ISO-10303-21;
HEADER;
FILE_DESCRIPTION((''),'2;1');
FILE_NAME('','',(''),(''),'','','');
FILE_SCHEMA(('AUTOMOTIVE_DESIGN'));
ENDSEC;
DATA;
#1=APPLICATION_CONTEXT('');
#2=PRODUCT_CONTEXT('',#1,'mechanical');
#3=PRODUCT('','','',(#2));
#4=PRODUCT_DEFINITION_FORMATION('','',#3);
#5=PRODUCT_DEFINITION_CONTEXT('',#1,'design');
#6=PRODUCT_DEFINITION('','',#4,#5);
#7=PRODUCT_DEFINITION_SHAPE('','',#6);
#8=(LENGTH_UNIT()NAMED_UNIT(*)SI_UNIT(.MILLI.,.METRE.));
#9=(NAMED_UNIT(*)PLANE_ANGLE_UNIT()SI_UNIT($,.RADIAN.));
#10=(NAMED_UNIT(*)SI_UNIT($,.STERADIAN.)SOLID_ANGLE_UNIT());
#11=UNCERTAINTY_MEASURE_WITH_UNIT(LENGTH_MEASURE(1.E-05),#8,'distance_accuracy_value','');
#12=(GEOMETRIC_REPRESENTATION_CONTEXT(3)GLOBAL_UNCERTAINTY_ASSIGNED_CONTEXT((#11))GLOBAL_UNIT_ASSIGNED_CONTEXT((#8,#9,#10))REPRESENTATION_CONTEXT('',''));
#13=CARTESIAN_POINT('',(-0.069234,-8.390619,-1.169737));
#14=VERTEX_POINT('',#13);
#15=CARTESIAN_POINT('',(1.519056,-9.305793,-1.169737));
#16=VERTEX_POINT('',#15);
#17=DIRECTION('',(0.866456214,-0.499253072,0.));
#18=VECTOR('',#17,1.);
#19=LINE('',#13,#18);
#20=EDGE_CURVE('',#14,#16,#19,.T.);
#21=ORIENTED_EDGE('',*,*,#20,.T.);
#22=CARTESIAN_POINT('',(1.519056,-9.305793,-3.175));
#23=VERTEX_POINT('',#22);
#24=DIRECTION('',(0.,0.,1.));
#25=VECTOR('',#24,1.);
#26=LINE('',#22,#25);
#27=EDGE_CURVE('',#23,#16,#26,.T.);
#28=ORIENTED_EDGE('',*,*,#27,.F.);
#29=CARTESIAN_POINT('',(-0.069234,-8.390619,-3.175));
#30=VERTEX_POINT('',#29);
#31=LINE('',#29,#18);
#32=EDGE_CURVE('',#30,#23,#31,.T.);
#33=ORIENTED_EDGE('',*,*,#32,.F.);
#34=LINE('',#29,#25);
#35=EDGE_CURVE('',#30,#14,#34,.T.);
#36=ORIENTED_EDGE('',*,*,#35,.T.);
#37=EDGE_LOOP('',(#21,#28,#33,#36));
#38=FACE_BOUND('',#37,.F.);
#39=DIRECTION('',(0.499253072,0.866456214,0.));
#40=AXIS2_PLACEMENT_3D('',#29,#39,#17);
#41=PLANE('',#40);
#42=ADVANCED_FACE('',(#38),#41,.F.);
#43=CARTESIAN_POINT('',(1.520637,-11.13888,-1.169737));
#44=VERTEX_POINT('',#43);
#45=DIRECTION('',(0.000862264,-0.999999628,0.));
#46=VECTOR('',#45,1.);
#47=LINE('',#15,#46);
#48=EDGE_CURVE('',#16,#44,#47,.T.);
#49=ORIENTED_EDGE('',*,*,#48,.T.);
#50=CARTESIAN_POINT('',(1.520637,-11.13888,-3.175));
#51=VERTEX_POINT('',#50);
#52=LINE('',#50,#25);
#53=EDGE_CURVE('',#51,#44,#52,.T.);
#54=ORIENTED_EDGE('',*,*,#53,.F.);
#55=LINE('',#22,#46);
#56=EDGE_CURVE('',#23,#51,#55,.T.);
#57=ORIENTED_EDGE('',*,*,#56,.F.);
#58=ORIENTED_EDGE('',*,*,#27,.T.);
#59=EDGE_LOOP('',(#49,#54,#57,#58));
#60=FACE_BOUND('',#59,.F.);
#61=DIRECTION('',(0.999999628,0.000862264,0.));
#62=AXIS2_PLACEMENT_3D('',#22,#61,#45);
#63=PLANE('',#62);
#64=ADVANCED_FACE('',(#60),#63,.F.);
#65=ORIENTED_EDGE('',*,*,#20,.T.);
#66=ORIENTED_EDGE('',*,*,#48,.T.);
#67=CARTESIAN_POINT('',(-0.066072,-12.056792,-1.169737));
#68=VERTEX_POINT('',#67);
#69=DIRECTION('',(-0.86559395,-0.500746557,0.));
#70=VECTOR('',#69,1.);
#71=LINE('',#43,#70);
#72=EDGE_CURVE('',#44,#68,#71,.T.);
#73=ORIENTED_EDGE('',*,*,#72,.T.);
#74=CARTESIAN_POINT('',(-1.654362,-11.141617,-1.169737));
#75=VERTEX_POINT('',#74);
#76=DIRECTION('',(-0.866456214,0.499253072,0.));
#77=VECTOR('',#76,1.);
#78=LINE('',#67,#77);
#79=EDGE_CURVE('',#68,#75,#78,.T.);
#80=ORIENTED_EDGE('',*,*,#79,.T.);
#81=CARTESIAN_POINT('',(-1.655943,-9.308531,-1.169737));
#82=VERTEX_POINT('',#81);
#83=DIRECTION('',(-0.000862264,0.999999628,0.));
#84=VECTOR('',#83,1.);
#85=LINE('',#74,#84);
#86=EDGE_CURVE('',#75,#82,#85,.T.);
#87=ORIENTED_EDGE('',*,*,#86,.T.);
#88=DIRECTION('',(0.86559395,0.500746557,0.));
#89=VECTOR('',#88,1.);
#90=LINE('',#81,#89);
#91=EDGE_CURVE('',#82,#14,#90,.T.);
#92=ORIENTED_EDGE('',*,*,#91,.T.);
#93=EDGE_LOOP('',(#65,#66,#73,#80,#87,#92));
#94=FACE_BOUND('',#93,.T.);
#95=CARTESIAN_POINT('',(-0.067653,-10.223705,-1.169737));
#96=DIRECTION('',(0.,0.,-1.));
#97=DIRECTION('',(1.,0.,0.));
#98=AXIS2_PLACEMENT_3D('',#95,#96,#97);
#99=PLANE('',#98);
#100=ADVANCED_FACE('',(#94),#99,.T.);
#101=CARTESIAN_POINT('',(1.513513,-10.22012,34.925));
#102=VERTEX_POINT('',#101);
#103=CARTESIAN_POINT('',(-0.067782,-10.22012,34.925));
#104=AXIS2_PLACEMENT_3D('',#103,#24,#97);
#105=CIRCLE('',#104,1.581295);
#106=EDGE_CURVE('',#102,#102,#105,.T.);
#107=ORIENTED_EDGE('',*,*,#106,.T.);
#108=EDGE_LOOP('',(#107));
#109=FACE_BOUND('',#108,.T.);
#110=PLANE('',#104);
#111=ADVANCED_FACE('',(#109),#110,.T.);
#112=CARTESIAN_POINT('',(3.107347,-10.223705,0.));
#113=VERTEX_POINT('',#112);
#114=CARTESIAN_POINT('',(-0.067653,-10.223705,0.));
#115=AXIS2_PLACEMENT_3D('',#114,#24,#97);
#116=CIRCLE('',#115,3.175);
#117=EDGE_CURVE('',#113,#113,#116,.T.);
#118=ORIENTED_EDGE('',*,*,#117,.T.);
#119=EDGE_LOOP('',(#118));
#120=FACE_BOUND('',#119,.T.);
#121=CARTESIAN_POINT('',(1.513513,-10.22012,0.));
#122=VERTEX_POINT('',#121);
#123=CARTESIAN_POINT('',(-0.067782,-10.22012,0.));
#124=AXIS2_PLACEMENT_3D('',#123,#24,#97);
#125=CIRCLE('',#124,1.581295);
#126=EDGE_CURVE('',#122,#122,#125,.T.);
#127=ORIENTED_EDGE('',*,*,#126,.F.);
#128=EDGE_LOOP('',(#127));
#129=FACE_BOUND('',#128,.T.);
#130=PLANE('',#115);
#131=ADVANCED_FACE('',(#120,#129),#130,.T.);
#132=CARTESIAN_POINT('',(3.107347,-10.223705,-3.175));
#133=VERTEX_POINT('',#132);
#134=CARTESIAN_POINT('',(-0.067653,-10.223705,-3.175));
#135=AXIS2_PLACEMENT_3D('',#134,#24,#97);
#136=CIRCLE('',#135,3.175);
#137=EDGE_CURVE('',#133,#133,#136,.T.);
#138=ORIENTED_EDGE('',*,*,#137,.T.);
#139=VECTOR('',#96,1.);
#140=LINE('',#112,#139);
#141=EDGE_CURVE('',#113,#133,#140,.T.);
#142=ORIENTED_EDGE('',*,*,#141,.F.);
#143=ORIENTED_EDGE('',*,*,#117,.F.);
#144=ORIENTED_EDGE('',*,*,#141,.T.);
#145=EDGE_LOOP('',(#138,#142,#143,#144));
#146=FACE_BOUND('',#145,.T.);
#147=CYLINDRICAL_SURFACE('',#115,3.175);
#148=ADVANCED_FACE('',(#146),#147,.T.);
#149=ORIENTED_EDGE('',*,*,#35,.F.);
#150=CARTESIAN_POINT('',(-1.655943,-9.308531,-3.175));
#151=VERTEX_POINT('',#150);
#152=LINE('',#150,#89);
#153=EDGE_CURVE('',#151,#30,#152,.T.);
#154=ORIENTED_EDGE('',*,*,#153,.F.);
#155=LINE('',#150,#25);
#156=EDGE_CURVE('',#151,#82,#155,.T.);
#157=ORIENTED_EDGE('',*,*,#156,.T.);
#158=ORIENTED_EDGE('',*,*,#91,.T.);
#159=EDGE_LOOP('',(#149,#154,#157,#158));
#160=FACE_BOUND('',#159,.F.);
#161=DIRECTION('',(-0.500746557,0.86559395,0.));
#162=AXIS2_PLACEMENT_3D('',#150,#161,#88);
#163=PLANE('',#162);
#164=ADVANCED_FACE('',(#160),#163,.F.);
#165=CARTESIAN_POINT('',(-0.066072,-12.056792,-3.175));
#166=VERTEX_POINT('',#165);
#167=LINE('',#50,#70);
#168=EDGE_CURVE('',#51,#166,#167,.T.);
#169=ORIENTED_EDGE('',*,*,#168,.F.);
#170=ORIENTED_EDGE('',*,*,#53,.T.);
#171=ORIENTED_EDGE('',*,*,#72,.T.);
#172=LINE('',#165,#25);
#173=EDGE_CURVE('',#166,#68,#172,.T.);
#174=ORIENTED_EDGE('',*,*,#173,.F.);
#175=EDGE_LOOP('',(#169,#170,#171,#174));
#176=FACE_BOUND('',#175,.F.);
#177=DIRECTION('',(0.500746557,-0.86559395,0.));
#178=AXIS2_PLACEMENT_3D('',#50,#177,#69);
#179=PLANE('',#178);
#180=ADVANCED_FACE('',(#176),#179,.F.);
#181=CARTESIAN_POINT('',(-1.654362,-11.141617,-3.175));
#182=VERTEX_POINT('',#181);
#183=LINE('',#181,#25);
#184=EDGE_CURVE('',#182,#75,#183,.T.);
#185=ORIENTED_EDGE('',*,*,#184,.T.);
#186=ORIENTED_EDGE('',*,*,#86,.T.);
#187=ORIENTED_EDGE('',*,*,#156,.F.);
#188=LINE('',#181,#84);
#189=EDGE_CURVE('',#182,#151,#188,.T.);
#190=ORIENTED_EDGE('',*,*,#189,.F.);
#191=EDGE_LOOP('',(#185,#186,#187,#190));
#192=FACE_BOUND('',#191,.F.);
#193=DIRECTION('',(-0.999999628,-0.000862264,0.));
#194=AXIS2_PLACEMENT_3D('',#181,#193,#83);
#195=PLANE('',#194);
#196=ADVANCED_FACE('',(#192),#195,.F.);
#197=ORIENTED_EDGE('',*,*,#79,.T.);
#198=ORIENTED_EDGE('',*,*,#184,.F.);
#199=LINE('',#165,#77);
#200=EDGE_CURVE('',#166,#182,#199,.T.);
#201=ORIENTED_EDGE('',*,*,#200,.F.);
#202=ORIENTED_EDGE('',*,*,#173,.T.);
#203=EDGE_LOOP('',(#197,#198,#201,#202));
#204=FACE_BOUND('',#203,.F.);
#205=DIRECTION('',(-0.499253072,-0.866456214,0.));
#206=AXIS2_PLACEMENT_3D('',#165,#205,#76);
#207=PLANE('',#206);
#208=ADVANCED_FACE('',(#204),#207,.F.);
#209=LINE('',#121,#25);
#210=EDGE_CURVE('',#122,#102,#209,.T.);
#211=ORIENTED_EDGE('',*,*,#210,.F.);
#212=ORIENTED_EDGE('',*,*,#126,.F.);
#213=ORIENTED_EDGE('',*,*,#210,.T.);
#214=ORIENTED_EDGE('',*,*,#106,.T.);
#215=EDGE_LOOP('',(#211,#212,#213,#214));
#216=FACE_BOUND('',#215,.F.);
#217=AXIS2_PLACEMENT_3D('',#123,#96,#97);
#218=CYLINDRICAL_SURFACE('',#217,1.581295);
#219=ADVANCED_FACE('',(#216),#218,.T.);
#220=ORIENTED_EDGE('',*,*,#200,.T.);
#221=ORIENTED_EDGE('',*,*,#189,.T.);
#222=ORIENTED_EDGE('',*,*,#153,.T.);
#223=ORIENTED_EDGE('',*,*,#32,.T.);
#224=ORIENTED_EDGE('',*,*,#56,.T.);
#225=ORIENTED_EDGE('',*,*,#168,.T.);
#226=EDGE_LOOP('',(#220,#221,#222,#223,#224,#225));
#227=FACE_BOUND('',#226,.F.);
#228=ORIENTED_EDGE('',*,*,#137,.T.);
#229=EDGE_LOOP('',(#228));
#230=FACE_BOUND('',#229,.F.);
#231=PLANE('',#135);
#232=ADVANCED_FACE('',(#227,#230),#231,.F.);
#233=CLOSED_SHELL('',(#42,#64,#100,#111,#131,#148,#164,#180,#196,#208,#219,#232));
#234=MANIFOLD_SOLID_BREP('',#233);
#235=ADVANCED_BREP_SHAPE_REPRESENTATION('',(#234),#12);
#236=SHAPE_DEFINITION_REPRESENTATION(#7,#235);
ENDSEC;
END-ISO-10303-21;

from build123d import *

# Parameters (mm, degrees)
F1_R     = 1.5812951981
F2_DEPTH = 34.925
F0_R     = 3.175
F3_DEPTH = 3.175
F5_DEPTH = 2.0052631579


# Not quite as in the source:
# - a length typed as a fraction of an inch, garbled in the dataset ("3 / 203.2 mm" for 3/8 in), is restored


with BuildPart() as f2:
    # F1 (on face) → F2 (new body)
    with BuildSketch(Plane.XY):
        with Locations((-0.0677817225, -10.2201197296)):
            Circle(F1_R)
    extrude(amount=F2_DEPTH)

    # F0 (on Top) → F3 (join)
    with BuildSketch(Plane.XY):
        with Locations((-0.0676529453, -10.2237053216)):
            Circle(F0_R)
    extrude(amount=-F3_DEPTH)

    # F4 (on face) → F5 (cut)
    with BuildSketch(Plane(origin=(0, 0, -3.175), x_dir=(1, 0, 0), z_dir=(0, 0, -1))):
        Polygon((-0.0660723406, 12.0567917448), (-1.6543620528, 11.141617377), (-1.6559426575, 9.3085309538), (-0.06923355, 8.3906188983), (1.5190561622, 9.3057932661), (1.5206367669, 11.1388796893), align=None)
    extrude(amount=-F5_DEPTH, mode=Mode.SUBTRACT)


solid = f2.part
